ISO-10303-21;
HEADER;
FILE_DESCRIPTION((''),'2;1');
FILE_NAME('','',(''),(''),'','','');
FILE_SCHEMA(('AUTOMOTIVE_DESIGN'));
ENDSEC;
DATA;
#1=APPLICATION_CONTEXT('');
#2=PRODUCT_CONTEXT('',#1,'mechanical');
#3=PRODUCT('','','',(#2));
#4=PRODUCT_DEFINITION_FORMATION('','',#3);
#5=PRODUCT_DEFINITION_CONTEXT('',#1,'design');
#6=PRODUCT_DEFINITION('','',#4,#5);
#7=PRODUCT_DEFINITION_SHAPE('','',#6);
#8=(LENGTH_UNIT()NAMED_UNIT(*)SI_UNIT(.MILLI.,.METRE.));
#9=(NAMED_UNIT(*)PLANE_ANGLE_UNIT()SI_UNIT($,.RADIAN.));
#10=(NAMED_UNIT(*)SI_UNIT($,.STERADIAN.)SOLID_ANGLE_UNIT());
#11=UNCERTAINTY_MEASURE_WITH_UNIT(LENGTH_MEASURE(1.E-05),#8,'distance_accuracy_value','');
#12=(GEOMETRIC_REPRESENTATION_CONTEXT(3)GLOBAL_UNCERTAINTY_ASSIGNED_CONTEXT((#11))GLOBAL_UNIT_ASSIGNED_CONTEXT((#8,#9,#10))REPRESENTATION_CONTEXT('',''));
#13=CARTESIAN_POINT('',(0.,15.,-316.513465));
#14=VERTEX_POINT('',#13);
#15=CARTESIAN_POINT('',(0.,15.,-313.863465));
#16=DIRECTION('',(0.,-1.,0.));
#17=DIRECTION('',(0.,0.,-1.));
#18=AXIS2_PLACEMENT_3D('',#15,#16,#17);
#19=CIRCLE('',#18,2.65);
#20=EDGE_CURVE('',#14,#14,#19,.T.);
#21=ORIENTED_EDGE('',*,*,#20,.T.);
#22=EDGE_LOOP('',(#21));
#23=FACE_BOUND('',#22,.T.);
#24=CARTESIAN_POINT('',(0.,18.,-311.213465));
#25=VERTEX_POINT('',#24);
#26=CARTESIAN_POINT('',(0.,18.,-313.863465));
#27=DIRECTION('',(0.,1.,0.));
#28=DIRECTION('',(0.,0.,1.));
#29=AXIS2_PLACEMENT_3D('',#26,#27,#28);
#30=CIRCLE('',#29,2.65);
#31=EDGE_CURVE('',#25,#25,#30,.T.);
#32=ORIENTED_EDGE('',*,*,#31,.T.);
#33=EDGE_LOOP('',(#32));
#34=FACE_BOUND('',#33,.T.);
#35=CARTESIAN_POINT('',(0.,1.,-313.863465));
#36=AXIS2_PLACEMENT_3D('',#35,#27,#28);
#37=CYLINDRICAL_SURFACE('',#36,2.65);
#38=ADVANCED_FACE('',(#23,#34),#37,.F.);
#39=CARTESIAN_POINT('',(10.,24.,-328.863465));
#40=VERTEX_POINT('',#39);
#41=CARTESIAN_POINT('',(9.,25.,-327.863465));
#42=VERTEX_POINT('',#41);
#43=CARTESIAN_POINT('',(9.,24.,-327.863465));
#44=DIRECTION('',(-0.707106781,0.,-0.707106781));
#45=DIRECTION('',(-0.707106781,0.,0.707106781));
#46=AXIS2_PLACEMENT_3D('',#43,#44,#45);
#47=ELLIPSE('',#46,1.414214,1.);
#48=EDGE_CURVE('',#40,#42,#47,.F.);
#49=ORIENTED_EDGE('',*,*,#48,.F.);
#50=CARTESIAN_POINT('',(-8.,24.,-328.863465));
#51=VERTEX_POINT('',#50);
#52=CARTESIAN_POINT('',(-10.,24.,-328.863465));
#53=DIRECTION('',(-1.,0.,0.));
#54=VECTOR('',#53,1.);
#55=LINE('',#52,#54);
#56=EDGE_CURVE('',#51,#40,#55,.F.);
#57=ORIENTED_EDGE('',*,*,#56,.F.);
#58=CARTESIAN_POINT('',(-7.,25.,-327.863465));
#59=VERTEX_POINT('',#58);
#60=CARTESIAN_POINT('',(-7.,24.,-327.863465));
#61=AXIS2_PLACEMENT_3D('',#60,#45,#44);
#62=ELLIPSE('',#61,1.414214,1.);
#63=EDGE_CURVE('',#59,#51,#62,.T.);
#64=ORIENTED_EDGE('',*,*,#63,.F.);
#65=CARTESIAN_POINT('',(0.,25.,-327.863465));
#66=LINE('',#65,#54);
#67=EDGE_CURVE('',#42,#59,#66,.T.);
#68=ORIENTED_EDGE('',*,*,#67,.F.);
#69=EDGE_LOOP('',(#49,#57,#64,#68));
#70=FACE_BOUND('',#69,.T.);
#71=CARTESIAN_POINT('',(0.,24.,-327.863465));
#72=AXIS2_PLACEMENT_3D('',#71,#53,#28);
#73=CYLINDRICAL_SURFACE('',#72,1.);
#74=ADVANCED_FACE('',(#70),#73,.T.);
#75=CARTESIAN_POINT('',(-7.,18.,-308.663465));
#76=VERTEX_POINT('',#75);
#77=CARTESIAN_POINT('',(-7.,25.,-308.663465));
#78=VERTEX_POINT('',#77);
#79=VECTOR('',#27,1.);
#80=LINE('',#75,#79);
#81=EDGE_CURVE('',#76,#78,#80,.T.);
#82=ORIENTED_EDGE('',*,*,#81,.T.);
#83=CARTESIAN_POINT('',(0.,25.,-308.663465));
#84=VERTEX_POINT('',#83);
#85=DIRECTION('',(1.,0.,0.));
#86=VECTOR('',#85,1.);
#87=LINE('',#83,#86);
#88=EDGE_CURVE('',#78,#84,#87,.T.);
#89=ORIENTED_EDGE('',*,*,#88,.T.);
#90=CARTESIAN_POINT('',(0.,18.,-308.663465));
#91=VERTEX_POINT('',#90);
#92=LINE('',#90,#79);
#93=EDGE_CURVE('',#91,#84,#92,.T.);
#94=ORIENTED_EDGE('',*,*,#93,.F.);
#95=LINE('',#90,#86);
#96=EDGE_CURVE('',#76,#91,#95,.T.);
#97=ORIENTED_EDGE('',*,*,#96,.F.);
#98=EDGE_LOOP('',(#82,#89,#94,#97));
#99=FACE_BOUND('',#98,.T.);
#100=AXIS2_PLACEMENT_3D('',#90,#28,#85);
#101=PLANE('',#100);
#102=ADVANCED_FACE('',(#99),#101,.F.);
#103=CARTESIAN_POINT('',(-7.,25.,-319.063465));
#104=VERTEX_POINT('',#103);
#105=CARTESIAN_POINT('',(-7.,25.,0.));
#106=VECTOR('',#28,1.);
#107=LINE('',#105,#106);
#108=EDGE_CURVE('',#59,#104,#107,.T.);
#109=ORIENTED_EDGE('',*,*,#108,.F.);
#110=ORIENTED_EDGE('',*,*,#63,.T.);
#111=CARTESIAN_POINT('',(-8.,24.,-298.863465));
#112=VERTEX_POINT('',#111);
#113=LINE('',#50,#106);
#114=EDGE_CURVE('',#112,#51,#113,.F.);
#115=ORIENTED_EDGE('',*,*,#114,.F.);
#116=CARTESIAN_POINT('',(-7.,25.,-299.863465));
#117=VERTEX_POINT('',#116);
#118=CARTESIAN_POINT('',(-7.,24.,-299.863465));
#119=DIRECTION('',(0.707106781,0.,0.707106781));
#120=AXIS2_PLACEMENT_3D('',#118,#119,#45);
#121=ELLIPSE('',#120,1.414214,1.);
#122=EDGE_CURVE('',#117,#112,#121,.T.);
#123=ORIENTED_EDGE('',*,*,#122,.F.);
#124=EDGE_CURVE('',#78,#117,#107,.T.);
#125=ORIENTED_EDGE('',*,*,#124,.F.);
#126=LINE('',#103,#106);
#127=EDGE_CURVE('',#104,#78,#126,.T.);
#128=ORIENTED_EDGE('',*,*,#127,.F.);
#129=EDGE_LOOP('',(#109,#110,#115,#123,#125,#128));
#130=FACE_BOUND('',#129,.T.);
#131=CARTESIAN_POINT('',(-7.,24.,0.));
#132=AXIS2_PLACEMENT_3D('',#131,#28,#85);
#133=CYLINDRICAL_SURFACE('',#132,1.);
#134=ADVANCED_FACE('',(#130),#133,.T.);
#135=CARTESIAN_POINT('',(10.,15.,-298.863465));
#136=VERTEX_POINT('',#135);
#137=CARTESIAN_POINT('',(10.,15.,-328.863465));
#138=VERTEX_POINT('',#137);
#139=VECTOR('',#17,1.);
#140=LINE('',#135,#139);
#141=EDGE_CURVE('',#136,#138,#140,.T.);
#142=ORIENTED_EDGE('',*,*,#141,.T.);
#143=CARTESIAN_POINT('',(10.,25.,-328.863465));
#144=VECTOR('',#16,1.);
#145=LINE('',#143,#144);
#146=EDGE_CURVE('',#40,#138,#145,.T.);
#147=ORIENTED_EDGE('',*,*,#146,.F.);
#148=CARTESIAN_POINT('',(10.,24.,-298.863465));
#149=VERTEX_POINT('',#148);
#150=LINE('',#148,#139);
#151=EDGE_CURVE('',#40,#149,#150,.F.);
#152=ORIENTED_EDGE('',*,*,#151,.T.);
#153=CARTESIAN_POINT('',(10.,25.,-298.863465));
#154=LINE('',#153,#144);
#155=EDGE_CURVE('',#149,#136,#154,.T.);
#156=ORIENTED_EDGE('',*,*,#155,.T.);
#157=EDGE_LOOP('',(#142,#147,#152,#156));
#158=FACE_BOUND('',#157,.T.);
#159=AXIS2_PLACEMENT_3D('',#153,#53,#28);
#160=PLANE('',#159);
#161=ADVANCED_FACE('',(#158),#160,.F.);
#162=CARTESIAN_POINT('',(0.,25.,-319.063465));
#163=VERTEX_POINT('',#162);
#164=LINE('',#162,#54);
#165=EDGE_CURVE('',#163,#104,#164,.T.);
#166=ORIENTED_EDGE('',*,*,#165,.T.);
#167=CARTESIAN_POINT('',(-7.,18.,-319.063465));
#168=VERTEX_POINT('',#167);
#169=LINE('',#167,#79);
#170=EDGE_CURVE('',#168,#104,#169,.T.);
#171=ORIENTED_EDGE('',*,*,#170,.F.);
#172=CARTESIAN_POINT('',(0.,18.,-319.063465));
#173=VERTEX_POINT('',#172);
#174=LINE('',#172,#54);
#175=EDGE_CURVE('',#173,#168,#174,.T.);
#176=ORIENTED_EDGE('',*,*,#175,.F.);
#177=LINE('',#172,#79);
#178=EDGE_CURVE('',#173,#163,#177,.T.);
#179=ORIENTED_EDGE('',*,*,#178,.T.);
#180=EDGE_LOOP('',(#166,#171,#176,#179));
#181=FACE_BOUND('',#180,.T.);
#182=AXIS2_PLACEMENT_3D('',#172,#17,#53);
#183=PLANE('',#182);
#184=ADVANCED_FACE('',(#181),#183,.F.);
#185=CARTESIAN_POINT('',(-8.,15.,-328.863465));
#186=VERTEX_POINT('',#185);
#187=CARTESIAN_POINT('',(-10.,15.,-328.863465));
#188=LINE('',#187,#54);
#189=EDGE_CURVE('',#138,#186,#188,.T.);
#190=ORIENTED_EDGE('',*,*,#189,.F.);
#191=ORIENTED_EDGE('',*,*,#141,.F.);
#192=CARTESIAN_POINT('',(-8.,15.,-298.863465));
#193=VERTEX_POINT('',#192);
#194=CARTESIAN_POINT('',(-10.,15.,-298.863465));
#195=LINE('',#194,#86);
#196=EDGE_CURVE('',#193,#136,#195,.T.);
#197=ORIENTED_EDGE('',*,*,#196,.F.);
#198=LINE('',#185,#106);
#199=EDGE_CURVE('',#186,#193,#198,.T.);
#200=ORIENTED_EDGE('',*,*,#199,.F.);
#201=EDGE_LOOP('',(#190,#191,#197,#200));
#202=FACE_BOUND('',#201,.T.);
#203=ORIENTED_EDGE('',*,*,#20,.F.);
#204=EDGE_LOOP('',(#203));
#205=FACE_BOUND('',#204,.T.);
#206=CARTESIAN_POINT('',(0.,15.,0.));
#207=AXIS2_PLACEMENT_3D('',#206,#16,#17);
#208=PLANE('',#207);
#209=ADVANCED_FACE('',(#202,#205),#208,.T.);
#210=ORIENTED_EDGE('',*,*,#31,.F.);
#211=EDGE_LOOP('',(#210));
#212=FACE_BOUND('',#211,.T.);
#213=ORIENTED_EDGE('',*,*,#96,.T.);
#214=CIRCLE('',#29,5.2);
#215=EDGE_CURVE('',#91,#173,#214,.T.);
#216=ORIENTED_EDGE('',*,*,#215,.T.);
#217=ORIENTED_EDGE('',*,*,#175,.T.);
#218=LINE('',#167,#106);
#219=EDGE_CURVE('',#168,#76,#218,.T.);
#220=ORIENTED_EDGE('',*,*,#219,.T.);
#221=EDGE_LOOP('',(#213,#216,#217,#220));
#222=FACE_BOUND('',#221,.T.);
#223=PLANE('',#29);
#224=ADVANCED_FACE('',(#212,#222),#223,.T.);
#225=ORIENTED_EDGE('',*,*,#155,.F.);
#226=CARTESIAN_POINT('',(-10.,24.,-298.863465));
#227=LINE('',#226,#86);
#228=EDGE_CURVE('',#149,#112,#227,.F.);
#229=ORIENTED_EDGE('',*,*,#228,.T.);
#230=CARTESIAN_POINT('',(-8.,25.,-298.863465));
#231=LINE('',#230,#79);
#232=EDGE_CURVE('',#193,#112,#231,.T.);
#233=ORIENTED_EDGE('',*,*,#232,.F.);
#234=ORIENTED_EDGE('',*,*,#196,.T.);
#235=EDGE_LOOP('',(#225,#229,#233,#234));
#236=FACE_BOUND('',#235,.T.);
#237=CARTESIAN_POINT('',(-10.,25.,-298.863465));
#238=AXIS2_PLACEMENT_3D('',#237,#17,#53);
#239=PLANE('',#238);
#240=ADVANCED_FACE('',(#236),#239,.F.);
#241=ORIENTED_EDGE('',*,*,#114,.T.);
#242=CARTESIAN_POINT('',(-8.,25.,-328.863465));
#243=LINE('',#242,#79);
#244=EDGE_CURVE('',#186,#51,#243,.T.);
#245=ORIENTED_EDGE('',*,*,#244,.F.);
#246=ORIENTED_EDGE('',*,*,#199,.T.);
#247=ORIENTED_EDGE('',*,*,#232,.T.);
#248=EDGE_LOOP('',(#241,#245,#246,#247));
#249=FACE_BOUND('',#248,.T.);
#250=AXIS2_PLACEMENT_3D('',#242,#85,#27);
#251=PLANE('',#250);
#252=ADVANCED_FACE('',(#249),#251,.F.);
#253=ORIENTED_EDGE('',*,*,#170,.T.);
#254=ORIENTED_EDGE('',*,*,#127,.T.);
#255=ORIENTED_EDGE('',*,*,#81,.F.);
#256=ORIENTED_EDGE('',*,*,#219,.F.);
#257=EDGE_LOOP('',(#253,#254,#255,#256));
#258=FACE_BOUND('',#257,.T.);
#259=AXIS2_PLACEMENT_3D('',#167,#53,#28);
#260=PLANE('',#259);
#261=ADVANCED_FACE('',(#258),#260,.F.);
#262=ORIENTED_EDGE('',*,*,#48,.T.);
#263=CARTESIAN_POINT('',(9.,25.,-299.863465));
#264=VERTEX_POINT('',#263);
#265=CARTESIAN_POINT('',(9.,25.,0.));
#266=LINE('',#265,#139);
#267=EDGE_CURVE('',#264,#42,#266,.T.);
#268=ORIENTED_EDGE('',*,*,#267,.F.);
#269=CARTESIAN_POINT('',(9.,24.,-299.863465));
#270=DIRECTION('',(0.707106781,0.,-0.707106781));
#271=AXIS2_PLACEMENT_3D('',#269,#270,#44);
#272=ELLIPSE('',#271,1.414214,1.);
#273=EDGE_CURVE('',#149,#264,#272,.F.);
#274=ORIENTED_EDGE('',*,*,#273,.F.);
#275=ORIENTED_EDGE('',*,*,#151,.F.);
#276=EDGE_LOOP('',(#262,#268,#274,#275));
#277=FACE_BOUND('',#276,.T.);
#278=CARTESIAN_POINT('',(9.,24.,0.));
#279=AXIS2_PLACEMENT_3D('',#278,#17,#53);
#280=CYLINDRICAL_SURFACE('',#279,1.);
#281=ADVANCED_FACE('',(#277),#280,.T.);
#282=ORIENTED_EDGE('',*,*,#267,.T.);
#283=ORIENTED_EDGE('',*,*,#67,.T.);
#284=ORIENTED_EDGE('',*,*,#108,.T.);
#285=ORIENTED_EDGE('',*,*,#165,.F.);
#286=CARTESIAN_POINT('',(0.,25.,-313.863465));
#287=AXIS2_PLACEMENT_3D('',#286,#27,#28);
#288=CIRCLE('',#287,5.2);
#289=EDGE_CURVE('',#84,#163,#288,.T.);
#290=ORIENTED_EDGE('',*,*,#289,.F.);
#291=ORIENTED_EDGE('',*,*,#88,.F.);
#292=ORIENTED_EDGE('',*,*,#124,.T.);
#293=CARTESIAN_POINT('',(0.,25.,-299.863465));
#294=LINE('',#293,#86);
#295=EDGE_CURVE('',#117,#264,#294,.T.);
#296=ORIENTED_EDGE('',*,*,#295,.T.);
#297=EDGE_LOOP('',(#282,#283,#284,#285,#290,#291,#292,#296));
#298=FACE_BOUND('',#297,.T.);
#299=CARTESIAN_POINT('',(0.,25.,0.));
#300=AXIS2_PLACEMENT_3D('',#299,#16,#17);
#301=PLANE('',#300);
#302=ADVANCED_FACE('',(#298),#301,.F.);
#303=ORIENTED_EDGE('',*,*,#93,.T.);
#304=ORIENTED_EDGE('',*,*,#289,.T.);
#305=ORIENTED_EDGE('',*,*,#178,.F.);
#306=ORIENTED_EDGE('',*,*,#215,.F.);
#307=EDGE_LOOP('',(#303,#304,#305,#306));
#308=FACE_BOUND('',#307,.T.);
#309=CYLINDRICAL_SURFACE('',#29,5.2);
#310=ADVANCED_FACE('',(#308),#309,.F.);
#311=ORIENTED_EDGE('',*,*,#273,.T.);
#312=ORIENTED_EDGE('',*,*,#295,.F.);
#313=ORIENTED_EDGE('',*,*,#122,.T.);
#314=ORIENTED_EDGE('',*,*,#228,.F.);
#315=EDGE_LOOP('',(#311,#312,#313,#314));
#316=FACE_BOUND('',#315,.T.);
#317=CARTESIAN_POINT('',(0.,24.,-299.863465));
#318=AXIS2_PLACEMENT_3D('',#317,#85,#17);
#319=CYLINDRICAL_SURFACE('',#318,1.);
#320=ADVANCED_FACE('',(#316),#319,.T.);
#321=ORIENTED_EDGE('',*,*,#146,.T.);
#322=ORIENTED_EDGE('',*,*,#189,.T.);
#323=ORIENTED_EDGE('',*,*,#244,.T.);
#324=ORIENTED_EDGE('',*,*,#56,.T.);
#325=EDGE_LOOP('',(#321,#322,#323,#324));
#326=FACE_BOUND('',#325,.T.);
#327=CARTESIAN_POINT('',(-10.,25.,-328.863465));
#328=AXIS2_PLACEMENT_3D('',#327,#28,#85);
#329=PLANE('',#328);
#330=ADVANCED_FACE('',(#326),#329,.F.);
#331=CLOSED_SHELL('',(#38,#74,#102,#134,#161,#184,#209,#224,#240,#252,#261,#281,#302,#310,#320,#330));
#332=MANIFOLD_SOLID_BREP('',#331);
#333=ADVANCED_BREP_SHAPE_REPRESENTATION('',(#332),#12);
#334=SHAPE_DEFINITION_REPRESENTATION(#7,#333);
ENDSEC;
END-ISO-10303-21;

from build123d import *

# Parameters (mm, degrees)
SKETCH2_W          = 20
SKETCH2_H          = 30
EXTRUDE1_DEPTH     = 10
CUT_EXTRUDE1_DEPTH = 7
SKETCH4_R          = 2.65
CUT_EXTRUDE2_DEPTH = 17
SKETCH7_W          = 2
SKETCH7_H          = 10
EXTRUDE2_DEPTH     = 30
FILLET1_R          = 1


with BuildPart() as part:
    # Sketch2 → Extrude1 (new body)
    with BuildSketch(Plane(origin=(0, 15, 0), x_dir=(1, 0, 0), z_dir=(0, 1, 0))):
        with Locations((0, 313.863465254)):
            Rectangle(SKETCH2_W, SKETCH2_H)
    extrude(amount=EXTRUDE1_DEPTH)

    # Sketch3 → Cut-Extrude1 (cut)
    with BuildSketch(Plane(origin=(0, 25, 0), x_dir=(1, 0, 0), z_dir=(0, 1, 0))):
        with BuildLine():
            Line((0, 319.063465254), (-7, 319.063465254))
            Line((-7, 319.063465254), (-7, 308.663465254))
            Line((-7, 308.663465254), (0, 308.663465254))
            ThreePointArc((0, 308.663465254), (5.2, 313.863465254), (0, 319.063465254))
        make_face()
    extrude(amount=-CUT_EXTRUDE1_DEPTH, mode=Mode.SUBTRACT)

    # Sketch4 → Cut-Extrude2 (cut)
    with BuildSketch(Plane(origin=(0, 18, 0), x_dir=(1, 0, 0), z_dir=(0, 1, 0))):
        with Locations(Location((0, 313.863465254, 0), (0, 0, 270))):
            Circle(SKETCH4_R)
    extrude(amount=-CUT_EXTRUDE2_DEPTH, mode=Mode.SUBTRACT)

    # Sketch7 → Extrude2 (cut)
    with BuildSketch(Plane.XY.offset(-298.863465254)):
        with Locations((-9, 20)):
            Rectangle(SKETCH7_W, SKETCH7_H)
    extrude(amount=-EXTRUDE2_DEPTH, mode=Mode.SUBTRACT)

    # Fillet1
    fillet1_edges = [part.edges().sort_by_distance(p)[0] for p in [
        (1, 25, -298.863465254),
        (-8, 25, -313.863465254),
        (10, 25, -313.863465254),
        (1, 25, -328.863465254),
    ]]
    fillet(fillet1_edges, radius=FILLET1_R - 0.0001)  # a hair under: the kernel refuses the full size


solid = part.part
